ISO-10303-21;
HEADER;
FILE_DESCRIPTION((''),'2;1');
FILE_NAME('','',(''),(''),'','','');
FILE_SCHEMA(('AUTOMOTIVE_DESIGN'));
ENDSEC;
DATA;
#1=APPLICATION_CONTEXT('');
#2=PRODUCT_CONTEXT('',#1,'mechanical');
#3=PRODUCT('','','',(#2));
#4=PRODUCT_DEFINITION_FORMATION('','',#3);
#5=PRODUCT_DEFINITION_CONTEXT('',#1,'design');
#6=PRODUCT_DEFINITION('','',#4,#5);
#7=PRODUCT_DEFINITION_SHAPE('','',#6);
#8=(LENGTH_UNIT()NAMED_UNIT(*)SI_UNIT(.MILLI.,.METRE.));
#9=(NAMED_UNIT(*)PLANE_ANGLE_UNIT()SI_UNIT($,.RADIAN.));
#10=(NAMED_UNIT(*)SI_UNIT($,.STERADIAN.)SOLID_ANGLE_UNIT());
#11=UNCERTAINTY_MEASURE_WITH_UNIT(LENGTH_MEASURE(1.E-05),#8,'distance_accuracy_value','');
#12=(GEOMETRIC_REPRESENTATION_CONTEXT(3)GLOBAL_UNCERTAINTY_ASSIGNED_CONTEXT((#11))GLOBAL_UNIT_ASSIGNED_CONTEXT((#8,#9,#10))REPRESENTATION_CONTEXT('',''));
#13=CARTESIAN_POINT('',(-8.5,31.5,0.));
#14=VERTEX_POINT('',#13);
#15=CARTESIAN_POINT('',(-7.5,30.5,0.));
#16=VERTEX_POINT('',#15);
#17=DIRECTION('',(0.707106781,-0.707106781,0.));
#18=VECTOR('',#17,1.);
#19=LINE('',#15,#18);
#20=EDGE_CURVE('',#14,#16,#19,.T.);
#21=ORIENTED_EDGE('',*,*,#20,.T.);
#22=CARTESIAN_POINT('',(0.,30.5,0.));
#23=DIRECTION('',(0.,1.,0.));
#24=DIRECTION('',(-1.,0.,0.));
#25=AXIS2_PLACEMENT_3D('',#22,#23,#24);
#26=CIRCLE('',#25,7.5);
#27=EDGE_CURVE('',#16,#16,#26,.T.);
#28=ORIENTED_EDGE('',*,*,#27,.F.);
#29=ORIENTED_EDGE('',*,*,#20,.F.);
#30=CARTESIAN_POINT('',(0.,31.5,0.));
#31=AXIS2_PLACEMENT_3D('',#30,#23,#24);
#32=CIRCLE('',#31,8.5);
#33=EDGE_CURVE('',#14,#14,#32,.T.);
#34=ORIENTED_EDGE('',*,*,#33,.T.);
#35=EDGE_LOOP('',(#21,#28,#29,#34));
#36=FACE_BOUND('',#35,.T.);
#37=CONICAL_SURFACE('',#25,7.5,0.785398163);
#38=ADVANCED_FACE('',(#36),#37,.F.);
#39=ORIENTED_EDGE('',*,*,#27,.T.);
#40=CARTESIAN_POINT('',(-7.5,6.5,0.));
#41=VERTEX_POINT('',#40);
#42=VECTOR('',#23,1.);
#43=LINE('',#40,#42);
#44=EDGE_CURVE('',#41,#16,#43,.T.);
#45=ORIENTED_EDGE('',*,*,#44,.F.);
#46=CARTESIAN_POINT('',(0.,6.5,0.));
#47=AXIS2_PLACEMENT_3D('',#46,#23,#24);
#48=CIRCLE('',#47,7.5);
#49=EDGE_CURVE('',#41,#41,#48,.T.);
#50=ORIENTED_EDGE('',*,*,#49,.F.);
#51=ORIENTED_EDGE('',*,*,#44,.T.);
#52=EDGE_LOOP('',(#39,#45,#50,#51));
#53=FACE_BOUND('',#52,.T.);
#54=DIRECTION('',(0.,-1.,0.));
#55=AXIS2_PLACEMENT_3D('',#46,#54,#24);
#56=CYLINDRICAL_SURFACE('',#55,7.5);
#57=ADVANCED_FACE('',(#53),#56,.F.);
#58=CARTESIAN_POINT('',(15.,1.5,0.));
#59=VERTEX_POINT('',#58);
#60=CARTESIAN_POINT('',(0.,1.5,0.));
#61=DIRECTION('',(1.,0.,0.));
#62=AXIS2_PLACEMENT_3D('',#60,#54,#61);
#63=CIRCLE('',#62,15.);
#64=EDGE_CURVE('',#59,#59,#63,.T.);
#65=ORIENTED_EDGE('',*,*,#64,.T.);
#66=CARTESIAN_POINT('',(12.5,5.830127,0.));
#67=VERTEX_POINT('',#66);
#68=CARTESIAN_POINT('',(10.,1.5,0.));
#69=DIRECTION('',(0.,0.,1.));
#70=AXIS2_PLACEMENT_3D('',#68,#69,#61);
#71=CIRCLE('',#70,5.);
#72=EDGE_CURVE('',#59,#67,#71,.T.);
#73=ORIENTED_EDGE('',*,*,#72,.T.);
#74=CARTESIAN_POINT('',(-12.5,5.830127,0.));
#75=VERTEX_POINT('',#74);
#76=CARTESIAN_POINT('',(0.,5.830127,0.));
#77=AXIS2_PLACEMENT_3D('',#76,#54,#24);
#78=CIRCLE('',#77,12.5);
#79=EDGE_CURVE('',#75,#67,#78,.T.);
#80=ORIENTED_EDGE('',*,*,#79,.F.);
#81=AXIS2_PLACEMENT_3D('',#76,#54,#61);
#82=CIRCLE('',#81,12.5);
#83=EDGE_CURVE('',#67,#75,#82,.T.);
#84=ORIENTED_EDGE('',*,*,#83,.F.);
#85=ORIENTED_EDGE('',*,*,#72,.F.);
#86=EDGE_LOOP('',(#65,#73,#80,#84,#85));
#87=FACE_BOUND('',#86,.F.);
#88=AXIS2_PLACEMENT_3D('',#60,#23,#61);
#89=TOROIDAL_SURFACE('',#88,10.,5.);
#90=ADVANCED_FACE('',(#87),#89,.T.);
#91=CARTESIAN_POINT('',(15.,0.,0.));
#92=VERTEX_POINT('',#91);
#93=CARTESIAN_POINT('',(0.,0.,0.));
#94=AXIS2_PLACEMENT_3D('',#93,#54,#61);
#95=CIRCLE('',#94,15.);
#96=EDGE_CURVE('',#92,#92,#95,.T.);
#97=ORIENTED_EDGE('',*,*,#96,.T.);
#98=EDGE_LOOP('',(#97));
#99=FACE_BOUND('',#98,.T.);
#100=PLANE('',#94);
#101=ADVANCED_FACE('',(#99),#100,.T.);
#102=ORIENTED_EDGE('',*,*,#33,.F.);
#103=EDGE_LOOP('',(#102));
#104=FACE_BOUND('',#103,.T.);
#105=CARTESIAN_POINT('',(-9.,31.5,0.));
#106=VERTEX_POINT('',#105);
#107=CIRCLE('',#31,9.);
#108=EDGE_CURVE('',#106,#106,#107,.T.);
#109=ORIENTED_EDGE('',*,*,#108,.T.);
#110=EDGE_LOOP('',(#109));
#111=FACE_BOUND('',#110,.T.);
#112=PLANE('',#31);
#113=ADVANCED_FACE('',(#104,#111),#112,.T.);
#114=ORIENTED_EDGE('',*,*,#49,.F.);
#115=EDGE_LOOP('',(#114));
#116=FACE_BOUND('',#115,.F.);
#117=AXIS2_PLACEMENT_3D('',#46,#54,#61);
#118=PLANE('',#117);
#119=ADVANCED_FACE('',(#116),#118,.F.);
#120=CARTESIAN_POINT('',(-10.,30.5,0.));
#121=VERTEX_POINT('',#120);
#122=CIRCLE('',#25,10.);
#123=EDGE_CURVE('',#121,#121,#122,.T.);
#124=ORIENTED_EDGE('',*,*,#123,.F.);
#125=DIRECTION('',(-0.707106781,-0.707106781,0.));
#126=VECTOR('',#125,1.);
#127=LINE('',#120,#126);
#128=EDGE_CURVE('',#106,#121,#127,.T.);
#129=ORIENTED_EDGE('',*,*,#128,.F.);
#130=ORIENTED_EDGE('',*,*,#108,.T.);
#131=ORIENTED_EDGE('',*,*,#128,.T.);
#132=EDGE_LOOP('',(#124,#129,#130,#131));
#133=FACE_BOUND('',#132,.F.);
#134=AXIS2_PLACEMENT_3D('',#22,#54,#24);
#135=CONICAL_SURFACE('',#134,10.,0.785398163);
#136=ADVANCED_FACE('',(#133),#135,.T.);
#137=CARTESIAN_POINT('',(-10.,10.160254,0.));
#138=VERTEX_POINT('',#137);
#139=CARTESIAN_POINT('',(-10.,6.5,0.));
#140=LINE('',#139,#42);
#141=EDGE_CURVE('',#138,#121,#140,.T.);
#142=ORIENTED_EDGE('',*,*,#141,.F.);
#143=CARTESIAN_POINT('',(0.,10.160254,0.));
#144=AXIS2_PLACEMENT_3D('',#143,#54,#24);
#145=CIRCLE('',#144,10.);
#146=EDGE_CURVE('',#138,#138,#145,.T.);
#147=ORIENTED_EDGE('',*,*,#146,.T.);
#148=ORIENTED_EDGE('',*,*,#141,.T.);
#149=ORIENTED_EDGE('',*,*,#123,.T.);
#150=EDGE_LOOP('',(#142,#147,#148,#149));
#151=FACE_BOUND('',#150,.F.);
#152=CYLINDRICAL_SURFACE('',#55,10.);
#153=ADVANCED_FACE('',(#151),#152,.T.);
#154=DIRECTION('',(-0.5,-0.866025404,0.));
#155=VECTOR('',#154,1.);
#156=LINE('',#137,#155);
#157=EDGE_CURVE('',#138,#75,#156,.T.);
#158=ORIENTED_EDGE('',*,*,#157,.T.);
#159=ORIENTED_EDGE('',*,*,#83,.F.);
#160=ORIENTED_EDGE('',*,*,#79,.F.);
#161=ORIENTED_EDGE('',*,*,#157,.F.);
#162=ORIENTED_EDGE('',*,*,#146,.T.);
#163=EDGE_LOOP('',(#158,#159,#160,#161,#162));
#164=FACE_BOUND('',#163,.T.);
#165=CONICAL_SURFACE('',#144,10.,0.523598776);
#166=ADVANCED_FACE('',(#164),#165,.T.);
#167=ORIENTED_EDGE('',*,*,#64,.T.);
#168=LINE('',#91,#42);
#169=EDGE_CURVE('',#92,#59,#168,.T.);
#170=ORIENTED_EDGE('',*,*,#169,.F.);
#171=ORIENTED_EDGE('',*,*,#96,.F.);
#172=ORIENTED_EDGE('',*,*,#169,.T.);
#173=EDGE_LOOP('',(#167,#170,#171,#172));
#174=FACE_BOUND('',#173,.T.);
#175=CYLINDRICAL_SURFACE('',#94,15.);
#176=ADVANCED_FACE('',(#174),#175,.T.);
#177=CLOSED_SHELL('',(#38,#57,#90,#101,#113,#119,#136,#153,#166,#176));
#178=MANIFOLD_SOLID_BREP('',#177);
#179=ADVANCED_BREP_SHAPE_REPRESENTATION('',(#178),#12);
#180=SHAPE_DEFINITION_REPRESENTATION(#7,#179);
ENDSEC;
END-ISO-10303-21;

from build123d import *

# Parameters (mm, degrees)
F0_R        = 15
F1_DEPTH    = 6.5
F2_R        = 5
F3_R        = 10
F3_R_2      = 7.5
F4_DEPTH    = 25
F5_SIZE     = 1
F6_SIZE     = 1
F7_T2_ANGLE = 180
F7_T4_ANGLE = 180


# Not quite as in the source:
# - a fillet or chamfer that OpenCascade refuses, or shapes differently, is made with other operations: its cross-section is extruded or revolved along the edge and cut away or added


with BuildPart() as f1:
    # F0 (on Front) → F1 (new body)
    with BuildSketch(Plane.XZ):
        Circle(F0_R)
    extrude(amount=-F1_DEPTH)

    # F2
    f2_edges = [f1.edges().sort_by_distance(p)[0] for p in [
        (-15, 6.5, 0),
    ]]
    fillet(f2_edges, radius=F2_R)

    # F3 (on face) → F4 (join)
    with BuildSketch(Plane(origin=(0, 6.5, 0), x_dir=(-1, 0, 0), z_dir=(0, 1, 0))):
        Circle(F3_R)
        Circle(F3_R_2, mode=Mode.SUBTRACT)
    extrude(amount=F4_DEPTH)

    # F5
    f5_edges = [f1.edges().sort_by_distance(p)[0] for p in [
        (7.5, 31.5, 0),
    ]]
    chamfer(f5_edges, length=F5_SIZE)

    # F6
    f6_edges = [f1.edges().sort_by_distance(p)[0] for p in [
        (10, 31.5, 0),
    ]]
    chamfer(f6_edges, length=F6_SIZE)

    # F7: chamfer of 5 on 2 edges, made by hand

    # F7_s1 → F7_t2 (revolve)
    with BuildSketch(Plane.XY):
        with BuildLine():
            Line((10, 10.1602540378), (12.5, 5.8301270189))
            ThreePointArc((12.5, 5.8301270189), (11.3657058128, 6.3098698146), (10, 6.5))
            Line((10, 6.5), (10, 10.1602540378))
        make_face()
    revolve(axis=Axis((0, 6.5, 0), (0, -1, 0)), revolution_arc=F7_T2_ANGLE)

    # F7_s3 → F7_t4 (revolve)
    with BuildSketch(Plane.XY):
        with BuildLine():
            Line((-10, 10.1602540378), (-12.5, 5.8301270189))
            ThreePointArc((-12.5, 5.8301270189), (-11.3657058128, 6.3098698146), (-10, 6.5))
            Line((-10, 6.5), (-10, 10.1602540378))
        make_face()
    revolve(axis=Axis((0, 6.5, 0), (0, -1, 0)), revolution_arc=F7_T4_ANGLE)


solid = f1.part
